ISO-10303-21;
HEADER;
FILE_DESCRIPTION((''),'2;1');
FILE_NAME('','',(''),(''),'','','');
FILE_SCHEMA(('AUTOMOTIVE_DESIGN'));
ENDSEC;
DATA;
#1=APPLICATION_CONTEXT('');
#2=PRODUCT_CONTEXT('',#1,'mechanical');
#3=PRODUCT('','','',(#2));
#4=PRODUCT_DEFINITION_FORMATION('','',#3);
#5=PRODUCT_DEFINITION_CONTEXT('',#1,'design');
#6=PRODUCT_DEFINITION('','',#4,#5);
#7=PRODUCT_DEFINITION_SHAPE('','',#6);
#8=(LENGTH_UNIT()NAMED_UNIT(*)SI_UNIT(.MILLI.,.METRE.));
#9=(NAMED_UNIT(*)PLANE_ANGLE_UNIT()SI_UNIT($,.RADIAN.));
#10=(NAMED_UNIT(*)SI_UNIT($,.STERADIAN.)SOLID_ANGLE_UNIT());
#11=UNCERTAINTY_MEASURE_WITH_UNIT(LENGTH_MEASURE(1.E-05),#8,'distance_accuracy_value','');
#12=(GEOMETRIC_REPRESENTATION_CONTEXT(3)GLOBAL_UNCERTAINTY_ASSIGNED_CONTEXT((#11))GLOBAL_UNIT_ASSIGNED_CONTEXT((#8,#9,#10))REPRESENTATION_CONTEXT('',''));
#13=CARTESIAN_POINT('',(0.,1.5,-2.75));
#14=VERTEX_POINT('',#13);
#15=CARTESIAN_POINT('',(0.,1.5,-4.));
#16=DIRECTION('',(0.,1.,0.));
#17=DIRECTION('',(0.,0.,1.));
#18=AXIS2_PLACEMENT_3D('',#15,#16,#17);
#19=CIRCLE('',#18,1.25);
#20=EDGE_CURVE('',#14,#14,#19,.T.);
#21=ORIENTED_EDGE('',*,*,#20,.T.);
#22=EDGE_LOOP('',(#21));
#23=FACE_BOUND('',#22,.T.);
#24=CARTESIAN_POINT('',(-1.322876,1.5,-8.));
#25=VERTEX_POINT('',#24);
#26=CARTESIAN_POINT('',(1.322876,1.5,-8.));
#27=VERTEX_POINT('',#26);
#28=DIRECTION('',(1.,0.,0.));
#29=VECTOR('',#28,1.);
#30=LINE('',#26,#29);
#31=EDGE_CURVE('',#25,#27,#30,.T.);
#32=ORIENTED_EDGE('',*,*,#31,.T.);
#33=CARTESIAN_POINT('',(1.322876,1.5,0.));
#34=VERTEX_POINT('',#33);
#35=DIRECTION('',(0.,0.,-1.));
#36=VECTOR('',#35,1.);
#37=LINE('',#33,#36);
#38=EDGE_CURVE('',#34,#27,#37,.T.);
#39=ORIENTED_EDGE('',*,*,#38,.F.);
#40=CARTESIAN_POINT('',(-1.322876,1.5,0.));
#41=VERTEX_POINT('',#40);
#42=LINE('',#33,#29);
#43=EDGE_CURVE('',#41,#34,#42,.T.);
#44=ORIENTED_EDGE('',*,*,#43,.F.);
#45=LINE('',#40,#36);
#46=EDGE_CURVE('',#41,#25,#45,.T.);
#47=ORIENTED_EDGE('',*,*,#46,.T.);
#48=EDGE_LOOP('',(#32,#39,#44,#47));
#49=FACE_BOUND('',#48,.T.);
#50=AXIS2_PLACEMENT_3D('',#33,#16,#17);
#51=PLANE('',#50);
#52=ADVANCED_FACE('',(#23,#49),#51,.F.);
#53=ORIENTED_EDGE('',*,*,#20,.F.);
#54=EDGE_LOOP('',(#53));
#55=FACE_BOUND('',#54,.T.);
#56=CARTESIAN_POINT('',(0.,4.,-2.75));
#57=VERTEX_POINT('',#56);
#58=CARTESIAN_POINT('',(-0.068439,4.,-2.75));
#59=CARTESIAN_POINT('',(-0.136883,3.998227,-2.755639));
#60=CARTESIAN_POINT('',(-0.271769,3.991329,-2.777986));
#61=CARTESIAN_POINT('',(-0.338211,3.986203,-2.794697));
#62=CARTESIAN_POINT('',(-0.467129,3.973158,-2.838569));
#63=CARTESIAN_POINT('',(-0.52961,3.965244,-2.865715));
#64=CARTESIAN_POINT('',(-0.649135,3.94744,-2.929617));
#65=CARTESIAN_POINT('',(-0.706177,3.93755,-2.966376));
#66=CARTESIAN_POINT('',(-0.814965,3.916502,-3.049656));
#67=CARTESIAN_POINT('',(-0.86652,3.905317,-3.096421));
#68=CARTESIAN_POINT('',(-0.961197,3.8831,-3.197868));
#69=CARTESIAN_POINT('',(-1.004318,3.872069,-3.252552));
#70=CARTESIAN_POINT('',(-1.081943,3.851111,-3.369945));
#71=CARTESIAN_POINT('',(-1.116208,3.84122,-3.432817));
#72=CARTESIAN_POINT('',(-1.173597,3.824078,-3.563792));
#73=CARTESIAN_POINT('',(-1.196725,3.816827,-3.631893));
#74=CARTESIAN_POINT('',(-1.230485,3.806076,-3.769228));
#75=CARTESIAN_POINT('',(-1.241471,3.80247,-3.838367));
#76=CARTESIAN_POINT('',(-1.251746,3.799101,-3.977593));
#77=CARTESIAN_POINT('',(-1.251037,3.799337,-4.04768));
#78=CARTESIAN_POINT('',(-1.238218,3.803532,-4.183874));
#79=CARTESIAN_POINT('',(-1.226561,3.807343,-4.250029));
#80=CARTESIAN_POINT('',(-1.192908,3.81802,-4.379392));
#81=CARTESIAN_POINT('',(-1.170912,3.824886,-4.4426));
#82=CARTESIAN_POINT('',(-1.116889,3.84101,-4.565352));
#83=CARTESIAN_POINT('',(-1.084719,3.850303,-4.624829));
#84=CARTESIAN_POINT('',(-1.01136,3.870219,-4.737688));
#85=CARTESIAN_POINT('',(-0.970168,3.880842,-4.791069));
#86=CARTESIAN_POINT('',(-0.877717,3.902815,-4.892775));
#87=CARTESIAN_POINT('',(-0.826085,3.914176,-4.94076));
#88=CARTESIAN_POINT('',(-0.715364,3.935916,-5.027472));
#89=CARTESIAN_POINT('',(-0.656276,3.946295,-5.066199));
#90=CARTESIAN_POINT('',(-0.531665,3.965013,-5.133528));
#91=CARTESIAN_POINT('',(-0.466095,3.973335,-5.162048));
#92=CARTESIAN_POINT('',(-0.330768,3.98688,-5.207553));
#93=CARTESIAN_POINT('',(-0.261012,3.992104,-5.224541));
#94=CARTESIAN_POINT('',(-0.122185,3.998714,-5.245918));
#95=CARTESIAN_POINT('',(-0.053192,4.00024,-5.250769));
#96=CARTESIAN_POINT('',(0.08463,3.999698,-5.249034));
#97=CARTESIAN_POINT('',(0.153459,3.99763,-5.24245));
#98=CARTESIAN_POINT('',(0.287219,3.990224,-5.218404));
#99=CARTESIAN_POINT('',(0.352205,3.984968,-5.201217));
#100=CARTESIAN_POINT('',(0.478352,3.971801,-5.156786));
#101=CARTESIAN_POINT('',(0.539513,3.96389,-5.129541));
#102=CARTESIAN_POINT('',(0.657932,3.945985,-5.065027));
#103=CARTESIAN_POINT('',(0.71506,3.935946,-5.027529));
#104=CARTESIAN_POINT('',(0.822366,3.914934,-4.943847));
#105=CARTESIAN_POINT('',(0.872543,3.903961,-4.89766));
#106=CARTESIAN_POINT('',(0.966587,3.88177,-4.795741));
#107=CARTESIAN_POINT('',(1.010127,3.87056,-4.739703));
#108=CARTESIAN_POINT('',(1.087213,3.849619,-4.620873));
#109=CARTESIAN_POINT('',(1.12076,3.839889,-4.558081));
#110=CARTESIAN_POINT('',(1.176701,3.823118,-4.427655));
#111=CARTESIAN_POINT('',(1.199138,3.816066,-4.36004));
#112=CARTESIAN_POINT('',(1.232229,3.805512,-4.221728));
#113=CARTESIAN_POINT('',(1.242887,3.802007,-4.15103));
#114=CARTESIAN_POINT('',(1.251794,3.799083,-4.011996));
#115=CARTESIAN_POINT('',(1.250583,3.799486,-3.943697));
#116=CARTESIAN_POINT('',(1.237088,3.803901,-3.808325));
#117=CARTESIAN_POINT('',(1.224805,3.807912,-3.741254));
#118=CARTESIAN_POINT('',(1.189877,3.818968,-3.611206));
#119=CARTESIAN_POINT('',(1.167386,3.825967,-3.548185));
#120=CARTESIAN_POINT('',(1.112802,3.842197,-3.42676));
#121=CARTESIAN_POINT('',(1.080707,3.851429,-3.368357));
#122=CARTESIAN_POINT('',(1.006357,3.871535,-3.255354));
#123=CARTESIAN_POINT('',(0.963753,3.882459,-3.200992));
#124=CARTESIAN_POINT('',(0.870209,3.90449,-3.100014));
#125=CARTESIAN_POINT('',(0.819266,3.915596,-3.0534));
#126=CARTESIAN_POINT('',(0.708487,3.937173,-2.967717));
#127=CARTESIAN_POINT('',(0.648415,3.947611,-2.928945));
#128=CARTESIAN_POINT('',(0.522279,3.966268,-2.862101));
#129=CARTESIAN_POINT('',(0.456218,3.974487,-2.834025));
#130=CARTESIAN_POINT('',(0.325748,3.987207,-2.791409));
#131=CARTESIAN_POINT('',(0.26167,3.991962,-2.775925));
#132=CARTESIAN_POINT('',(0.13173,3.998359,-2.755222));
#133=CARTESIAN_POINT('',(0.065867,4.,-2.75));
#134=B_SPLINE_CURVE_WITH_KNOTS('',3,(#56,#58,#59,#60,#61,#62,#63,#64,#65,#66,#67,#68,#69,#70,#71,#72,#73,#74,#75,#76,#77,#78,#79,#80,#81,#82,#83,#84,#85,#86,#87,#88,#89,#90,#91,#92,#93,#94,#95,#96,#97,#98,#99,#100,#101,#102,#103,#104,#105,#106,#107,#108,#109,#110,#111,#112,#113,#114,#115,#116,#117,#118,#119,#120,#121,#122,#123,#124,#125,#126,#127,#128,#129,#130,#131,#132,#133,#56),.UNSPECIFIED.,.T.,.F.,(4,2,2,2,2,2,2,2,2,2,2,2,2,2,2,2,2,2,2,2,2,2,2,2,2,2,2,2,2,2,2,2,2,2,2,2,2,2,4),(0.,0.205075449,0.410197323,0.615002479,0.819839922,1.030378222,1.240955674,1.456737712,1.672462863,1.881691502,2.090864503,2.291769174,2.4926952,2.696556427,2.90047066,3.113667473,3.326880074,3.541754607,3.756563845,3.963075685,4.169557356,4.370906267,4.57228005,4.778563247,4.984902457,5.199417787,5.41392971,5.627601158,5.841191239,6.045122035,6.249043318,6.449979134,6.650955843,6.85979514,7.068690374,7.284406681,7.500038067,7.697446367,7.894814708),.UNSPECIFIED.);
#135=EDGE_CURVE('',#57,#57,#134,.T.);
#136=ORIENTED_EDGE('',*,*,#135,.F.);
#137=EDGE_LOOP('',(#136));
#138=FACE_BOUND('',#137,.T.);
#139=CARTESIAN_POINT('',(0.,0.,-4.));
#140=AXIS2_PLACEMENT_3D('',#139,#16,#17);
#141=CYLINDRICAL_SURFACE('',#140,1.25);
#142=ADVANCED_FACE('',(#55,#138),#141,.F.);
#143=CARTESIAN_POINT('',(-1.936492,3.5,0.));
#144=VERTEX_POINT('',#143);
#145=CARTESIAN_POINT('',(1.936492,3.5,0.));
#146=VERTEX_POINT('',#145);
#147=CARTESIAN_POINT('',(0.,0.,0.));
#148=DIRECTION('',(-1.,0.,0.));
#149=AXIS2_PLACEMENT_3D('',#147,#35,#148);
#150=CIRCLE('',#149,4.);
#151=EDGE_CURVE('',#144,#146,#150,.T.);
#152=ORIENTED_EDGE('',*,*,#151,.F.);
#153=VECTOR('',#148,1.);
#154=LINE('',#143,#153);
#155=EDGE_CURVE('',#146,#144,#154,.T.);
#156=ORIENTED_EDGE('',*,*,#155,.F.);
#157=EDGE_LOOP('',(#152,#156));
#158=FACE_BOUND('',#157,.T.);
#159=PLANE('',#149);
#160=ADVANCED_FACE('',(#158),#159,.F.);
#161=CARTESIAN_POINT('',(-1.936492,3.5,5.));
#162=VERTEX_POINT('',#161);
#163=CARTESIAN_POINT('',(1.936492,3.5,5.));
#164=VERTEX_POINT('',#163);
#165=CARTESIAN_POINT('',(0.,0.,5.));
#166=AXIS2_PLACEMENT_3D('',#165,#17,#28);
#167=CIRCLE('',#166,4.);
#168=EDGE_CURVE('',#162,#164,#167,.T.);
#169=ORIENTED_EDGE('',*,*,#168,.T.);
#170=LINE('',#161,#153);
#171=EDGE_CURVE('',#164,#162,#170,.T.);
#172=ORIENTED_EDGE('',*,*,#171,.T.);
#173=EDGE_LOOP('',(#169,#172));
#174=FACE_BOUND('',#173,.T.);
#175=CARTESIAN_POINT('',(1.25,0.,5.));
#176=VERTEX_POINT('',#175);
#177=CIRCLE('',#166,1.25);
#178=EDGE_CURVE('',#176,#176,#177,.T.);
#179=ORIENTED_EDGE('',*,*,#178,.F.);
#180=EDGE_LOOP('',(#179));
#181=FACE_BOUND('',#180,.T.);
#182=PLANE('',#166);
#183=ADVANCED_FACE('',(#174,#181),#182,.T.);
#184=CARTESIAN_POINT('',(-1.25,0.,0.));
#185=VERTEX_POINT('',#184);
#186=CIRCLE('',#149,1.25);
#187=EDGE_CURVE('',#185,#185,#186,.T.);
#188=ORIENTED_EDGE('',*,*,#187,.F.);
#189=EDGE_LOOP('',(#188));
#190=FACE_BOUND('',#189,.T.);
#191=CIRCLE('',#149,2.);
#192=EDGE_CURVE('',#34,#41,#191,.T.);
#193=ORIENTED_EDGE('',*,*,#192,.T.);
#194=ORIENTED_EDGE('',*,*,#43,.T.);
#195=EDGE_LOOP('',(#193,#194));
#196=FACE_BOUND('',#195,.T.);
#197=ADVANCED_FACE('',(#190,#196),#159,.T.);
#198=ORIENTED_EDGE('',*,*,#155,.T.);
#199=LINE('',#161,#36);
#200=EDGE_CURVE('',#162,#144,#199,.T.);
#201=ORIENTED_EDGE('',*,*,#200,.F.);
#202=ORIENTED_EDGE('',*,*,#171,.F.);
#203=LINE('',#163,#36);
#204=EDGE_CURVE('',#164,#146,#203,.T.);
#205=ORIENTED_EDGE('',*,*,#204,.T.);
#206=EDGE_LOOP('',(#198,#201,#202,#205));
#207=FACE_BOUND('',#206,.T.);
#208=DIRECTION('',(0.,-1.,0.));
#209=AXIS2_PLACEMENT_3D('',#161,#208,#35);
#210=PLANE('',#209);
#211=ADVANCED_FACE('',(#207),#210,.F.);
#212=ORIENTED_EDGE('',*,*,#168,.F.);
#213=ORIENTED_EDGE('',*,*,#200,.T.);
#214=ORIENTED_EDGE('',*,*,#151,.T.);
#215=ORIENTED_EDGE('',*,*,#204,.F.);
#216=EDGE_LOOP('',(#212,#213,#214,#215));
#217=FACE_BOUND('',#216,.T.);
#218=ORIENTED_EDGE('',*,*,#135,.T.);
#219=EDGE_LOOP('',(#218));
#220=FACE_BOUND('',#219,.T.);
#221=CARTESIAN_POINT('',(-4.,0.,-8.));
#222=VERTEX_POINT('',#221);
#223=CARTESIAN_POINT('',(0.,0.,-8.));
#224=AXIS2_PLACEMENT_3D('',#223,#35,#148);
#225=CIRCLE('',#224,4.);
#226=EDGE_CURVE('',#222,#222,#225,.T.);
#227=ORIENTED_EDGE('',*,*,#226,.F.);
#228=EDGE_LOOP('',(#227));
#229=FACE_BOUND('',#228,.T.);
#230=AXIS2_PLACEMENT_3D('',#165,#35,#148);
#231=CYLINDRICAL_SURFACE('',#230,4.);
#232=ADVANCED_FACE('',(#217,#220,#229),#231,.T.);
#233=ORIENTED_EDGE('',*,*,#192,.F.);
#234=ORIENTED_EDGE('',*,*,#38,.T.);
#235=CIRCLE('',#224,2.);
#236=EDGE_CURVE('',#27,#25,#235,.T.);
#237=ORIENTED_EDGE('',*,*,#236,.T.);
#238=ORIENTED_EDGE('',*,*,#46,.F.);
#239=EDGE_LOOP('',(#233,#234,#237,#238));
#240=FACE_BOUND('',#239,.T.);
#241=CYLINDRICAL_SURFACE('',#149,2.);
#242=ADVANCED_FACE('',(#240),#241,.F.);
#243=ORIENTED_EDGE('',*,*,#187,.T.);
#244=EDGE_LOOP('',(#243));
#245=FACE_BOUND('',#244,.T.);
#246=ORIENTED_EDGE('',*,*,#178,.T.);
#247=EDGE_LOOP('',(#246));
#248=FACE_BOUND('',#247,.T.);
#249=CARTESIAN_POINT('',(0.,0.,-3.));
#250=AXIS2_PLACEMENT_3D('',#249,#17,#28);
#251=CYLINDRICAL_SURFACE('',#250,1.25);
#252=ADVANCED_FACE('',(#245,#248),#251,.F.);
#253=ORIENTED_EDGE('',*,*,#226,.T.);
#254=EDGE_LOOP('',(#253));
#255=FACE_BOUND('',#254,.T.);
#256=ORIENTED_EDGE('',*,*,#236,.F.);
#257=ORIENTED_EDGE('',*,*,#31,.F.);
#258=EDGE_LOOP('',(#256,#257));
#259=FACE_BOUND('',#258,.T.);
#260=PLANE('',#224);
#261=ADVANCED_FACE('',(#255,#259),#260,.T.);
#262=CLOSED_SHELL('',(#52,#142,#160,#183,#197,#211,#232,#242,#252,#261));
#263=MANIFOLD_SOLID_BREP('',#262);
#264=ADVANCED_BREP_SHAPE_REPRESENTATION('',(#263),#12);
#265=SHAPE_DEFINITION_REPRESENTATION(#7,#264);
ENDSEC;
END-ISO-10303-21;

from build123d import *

# Parameters (mm, degrees)
BOSS_EXTRUDE1_DEPTH    = 5
BOSS_EXTRUDE2_START    = 8
SKETCH2_R              = 4
BOSS_EXTRUDE2_DEPTH    = 8
CUT_EXTRUDE1_DEPTH     = 8
SKETCH4_R              = 1.25
CUT_EXTRUDE2_DEPTH     = 8
CUT_EXTRUDE3_START     = -2.5
CUT_EXTRUDE3_OUTLINE_R = 1.25
CUT_EXTRUDE3_DEPTH     = 2.5


# Read off the part's stored shape, not the designer's step: Cut-Extrude3
with BuildPart() as part:
    # Sketch1 → Boss-Extrude1 (new body)
    with BuildSketch(Plane.XY):
        with BuildLine():
            Line((-1.936491673, 3.5), (1.936491673, 3.5))
            ThreePointArc((1.936491673, 3.5), (0, -4), (-1.936491673, 3.5))
        make_face()
    extrude(amount=BOSS_EXTRUDE1_DEPTH)

    # Sketch2 → Boss-Extrude2 (add)
    with BuildSketch(Plane(origin=(0, 0, 0), x_dir=(-1, 0, 0), z_dir=(0, 0, -1)).offset(BOSS_EXTRUDE2_START)):
        Circle(SKETCH2_R)
    extrude(amount=-BOSS_EXTRUDE2_DEPTH)

    # Sketch3 → Cut-Extrude1 (cut)
    with BuildSketch(Plane(origin=(0, 0, -8), x_dir=(-1, 0, 0), z_dir=(0, 0, -1))):
        with BuildLine():
            Line((-1.322875656, 1.5), (1.322875656, 1.5))
            ThreePointArc((1.322875656, 1.5), (0, -2), (-1.322875656, 1.5))
        make_face()
    extrude(amount=-CUT_EXTRUDE1_DEPTH, mode=Mode.SUBTRACT)

    # Sketch4 → Cut-Extrude2 (cut)
    with BuildSketch(Plane.XY.offset(5)):
        Circle(SKETCH4_R)
    extrude(amount=-CUT_EXTRUDE2_DEPTH, mode=Mode.SUBTRACT)

    # Cut-Extrude3 outline → Cut-Extrude3 (cut)
    with BuildSketch(Plane(origin=(0, 4, 0), x_dir=(1, 0, 0), z_dir=(0, 1, 0)).offset(CUT_EXTRUDE3_START)):
        with Locations((0, 4)):
            Circle(CUT_EXTRUDE3_OUTLINE_R)
    extrude(amount=CUT_EXTRUDE3_DEPTH, mode=Mode.SUBTRACT)


solid = part.part
